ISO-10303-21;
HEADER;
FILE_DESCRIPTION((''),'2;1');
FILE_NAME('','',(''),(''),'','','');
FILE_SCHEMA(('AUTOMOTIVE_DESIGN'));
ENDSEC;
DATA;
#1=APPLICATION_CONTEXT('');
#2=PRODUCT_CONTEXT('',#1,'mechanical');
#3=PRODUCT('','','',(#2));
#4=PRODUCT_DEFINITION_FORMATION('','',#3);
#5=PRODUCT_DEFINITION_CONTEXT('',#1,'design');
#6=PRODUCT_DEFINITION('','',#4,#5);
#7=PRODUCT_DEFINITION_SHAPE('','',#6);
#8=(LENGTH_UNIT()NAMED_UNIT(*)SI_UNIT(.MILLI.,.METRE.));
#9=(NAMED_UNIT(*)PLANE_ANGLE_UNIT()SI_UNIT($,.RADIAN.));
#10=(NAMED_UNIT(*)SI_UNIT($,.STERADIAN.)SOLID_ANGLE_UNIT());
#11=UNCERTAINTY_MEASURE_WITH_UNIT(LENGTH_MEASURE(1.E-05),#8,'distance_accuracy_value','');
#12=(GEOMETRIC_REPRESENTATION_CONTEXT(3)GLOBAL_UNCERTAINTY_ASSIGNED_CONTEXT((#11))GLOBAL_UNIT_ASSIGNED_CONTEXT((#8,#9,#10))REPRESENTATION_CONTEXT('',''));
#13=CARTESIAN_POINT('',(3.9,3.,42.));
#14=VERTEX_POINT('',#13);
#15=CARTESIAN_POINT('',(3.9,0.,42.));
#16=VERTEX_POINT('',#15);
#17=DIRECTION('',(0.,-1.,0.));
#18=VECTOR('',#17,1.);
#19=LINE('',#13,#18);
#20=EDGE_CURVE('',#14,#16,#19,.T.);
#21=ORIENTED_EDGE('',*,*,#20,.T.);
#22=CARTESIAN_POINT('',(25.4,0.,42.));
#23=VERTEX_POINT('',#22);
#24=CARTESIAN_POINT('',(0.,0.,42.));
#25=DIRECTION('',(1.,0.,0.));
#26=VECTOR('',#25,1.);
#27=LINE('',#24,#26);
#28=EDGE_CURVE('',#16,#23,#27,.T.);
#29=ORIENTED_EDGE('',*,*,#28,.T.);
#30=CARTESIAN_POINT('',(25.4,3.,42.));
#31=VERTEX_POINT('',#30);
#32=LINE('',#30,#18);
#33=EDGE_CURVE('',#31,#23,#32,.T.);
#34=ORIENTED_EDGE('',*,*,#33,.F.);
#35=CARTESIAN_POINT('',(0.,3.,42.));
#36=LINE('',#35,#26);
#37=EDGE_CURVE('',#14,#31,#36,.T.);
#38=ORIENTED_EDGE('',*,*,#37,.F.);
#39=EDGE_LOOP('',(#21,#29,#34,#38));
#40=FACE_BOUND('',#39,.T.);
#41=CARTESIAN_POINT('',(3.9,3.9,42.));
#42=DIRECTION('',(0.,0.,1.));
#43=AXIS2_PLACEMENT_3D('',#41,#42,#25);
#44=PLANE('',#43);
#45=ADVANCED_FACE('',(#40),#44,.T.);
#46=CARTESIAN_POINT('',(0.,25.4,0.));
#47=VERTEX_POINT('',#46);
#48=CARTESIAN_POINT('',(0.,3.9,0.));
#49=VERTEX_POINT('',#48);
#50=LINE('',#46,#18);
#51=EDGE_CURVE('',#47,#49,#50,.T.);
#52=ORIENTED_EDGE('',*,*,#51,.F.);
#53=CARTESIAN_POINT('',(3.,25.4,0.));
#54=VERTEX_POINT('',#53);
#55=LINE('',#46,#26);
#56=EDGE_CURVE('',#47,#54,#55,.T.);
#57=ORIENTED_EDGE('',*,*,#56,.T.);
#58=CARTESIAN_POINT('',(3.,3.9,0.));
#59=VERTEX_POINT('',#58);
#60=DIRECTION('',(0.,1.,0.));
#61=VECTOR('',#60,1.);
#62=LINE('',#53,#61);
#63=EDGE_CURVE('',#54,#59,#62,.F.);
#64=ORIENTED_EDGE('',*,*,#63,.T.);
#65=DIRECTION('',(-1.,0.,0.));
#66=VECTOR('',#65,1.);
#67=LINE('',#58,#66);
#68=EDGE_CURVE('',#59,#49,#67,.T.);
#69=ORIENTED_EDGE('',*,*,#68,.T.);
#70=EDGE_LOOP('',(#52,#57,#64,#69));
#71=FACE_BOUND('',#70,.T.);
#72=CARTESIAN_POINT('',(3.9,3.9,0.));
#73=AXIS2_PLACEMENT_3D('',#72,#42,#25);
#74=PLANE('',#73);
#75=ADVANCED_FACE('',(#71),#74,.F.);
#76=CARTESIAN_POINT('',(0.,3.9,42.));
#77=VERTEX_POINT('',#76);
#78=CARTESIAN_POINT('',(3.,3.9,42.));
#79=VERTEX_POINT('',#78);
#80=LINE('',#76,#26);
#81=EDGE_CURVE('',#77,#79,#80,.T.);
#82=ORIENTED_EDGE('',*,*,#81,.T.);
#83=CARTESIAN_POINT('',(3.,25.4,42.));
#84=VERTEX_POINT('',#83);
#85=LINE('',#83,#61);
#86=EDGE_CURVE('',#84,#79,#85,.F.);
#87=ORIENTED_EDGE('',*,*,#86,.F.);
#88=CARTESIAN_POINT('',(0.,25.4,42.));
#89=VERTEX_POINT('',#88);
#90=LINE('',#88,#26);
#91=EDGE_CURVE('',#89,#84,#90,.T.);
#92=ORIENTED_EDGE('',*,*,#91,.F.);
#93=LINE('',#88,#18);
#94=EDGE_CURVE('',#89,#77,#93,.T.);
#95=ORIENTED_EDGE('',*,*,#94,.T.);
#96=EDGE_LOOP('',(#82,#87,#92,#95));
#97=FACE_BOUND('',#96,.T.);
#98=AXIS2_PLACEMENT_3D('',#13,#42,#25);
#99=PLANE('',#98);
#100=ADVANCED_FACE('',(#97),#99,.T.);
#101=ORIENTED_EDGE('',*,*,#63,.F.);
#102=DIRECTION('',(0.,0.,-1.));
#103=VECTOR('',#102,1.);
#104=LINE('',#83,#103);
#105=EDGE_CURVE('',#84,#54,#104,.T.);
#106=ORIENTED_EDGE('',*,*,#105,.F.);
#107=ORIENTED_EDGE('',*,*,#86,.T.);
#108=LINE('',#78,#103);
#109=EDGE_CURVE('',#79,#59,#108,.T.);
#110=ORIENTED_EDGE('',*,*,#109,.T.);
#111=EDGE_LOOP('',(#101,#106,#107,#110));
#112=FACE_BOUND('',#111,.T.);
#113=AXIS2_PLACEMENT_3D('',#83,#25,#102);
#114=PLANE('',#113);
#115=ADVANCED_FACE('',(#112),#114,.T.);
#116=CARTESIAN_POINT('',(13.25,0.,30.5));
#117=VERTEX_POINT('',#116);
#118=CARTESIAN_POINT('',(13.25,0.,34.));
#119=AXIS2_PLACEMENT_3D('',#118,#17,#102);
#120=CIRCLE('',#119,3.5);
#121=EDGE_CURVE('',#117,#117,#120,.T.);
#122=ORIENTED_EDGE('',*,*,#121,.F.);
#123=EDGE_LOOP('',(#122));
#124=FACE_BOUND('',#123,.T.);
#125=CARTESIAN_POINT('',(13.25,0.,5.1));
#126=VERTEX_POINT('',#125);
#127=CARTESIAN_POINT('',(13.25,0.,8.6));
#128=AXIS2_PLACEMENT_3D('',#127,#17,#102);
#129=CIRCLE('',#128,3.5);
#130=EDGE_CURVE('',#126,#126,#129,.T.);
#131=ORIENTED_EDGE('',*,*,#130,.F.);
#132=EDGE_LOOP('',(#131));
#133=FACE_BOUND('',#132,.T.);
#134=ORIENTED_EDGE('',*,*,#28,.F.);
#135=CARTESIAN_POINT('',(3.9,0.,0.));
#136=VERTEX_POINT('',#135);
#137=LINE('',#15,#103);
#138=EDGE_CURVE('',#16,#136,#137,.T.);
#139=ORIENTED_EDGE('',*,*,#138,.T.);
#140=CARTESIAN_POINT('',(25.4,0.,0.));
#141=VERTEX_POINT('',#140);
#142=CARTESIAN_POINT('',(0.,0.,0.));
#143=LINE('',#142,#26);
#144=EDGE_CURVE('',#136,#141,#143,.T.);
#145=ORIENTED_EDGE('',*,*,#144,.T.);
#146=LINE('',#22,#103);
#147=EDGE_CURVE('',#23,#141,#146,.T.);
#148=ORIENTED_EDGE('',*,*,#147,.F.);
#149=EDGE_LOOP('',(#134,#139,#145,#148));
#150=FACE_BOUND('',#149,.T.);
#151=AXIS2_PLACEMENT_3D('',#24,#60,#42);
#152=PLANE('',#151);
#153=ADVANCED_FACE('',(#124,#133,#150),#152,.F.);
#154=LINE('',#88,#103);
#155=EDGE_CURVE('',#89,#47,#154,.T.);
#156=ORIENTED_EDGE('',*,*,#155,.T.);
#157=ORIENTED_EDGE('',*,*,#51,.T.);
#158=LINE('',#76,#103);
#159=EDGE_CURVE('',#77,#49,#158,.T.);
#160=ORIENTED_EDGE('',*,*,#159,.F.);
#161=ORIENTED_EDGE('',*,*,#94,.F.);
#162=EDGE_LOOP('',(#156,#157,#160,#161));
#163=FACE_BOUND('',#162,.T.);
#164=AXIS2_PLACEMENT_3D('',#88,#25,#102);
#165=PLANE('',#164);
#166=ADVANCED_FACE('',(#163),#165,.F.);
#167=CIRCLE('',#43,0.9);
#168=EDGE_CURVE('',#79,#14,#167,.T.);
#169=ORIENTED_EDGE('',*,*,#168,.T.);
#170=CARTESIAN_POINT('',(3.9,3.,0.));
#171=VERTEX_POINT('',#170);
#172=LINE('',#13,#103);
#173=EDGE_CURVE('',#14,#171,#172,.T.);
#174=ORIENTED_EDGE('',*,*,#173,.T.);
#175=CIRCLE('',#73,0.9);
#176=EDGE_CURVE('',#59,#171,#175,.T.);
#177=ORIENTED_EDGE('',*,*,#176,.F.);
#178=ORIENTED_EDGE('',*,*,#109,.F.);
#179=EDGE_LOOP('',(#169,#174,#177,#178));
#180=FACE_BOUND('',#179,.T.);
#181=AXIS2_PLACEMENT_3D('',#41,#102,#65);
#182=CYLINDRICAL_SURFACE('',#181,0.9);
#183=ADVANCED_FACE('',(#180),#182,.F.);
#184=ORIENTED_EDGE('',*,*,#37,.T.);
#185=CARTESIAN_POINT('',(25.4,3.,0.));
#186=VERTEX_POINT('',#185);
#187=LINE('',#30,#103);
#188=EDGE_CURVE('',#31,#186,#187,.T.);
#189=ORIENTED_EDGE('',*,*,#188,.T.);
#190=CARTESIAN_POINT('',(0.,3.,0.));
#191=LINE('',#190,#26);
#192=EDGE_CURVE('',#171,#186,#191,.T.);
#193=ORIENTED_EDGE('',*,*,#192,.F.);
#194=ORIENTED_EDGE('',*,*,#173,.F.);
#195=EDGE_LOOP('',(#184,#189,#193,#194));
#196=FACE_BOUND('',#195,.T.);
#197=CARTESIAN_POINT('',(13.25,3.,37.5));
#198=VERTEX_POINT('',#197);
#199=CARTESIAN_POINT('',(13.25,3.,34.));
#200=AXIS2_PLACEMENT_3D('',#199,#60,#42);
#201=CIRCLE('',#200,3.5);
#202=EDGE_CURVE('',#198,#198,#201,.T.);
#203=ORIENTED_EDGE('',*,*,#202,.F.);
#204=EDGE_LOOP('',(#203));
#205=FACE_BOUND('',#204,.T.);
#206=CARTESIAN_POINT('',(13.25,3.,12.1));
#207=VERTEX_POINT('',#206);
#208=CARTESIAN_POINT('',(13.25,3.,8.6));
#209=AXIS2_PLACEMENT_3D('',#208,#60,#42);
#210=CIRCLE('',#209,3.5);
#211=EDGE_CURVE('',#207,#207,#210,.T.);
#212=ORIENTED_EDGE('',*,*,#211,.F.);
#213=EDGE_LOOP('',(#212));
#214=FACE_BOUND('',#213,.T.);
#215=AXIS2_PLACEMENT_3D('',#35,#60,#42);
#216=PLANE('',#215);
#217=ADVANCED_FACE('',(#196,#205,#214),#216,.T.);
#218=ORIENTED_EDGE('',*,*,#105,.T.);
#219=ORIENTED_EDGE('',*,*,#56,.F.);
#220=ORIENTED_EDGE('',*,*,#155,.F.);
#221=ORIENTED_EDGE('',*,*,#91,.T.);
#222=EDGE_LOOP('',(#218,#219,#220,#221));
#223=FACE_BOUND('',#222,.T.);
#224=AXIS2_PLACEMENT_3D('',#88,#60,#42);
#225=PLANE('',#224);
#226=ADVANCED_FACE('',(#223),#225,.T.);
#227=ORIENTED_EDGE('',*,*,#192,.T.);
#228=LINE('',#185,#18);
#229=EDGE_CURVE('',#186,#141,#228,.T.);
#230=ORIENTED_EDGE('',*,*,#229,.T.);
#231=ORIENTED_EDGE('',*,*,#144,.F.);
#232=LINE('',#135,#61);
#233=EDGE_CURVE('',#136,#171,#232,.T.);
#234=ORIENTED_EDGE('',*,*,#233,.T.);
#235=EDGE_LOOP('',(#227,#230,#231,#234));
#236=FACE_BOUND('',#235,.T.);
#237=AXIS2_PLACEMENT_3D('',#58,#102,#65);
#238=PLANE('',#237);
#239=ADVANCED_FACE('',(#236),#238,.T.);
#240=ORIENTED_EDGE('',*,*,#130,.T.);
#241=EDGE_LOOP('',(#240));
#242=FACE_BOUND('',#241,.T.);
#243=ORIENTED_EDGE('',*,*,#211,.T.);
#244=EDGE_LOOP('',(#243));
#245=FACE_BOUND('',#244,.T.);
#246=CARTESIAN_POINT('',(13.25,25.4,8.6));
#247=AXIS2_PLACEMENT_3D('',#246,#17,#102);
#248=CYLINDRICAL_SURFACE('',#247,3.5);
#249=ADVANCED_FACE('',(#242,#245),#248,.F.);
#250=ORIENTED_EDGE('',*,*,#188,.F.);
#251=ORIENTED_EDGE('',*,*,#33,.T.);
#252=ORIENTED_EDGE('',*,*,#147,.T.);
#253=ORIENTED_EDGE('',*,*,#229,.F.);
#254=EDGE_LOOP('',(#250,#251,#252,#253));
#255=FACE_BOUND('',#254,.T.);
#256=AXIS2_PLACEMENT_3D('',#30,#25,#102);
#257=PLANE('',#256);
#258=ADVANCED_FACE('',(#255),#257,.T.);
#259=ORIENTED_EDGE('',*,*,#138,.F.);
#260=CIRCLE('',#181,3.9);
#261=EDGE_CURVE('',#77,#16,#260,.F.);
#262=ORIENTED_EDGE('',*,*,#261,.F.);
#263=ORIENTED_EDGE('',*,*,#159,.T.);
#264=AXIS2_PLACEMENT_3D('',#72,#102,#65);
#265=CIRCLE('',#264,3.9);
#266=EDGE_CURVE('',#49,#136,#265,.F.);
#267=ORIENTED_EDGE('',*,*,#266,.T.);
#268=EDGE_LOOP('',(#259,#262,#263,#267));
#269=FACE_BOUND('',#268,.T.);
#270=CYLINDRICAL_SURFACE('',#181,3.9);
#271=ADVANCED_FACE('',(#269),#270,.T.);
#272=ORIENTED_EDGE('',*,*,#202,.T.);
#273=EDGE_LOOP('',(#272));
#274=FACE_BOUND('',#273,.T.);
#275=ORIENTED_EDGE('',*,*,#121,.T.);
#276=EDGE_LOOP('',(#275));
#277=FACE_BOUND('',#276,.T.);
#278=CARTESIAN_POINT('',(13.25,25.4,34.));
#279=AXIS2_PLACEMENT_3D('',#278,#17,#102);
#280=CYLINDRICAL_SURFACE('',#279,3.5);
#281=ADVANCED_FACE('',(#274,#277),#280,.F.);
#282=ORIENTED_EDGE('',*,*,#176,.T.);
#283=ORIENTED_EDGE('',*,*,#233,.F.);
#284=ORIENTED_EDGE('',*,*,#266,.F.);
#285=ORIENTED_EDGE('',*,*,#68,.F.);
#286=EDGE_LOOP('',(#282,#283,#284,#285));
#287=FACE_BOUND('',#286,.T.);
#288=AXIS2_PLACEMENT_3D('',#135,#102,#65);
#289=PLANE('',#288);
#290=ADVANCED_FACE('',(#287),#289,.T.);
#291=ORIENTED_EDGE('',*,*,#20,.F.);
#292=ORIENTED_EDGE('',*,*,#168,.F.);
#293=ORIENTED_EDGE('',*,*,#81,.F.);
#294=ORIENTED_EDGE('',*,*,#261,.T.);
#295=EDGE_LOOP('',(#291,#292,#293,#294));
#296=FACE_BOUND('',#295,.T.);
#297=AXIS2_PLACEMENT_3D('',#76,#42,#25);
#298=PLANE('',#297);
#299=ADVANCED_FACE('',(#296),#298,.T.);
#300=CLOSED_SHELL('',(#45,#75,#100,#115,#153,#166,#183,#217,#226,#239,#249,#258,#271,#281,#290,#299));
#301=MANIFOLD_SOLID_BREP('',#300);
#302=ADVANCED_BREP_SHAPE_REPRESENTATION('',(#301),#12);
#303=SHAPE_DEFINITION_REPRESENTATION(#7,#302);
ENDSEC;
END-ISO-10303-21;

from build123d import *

# Parameters (mm, degrees)
FLANGE_BASE1_DEPTH    = 42
ESBO_O2_R             = 3.5
CORTE_EXTRUS_O1_DEPTH = 56.265902689


# Sheet-metal steps are written as plain solids
with BuildPart() as part:
    # Esboço1 → Flange-base1 (new body)
    with BuildSketch(Plane.XY):
        with BuildLine():
            Line((0, 25.4), (0, 3.9))
            ThreePointArc((0, 3.9), (1.142283553, 1.142283553), (3.9, 0))
            Line((3.9, 0), (25.4, 0))
            Line((25.4, 0), (25.4, 3))
            Line((25.4, 3), (3.9, 3))
            ThreePointArc((3.9, 3), (3.263603897, 3.263603897), (3, 3.9))
            Line((3, 3.9), (3, 25.4))
            Line((3, 25.4), (0, 25.4))
        make_face()
    extrude(amount=FLANGE_BASE1_DEPTH)

    # Esboço2 → Corte-extrusão1 (cut, through all)
    with BuildSketch(Plane(origin=(0, 0, 0), x_dir=(-1, 0, 0), z_dir=(0, -1, 0))):
        with Locations(Location((-13.25, -34, 0), (0, 0, 90))):
            Circle(ESBO_O2_R)
        with Locations(Location((-13.25, -8.6, 0), (0, 0, 90))):
            Circle(ESBO_O2_R)
    extrude(amount=-CORTE_EXTRUS_O1_DEPTH, mode=Mode.SUBTRACT)


solid = part.part
